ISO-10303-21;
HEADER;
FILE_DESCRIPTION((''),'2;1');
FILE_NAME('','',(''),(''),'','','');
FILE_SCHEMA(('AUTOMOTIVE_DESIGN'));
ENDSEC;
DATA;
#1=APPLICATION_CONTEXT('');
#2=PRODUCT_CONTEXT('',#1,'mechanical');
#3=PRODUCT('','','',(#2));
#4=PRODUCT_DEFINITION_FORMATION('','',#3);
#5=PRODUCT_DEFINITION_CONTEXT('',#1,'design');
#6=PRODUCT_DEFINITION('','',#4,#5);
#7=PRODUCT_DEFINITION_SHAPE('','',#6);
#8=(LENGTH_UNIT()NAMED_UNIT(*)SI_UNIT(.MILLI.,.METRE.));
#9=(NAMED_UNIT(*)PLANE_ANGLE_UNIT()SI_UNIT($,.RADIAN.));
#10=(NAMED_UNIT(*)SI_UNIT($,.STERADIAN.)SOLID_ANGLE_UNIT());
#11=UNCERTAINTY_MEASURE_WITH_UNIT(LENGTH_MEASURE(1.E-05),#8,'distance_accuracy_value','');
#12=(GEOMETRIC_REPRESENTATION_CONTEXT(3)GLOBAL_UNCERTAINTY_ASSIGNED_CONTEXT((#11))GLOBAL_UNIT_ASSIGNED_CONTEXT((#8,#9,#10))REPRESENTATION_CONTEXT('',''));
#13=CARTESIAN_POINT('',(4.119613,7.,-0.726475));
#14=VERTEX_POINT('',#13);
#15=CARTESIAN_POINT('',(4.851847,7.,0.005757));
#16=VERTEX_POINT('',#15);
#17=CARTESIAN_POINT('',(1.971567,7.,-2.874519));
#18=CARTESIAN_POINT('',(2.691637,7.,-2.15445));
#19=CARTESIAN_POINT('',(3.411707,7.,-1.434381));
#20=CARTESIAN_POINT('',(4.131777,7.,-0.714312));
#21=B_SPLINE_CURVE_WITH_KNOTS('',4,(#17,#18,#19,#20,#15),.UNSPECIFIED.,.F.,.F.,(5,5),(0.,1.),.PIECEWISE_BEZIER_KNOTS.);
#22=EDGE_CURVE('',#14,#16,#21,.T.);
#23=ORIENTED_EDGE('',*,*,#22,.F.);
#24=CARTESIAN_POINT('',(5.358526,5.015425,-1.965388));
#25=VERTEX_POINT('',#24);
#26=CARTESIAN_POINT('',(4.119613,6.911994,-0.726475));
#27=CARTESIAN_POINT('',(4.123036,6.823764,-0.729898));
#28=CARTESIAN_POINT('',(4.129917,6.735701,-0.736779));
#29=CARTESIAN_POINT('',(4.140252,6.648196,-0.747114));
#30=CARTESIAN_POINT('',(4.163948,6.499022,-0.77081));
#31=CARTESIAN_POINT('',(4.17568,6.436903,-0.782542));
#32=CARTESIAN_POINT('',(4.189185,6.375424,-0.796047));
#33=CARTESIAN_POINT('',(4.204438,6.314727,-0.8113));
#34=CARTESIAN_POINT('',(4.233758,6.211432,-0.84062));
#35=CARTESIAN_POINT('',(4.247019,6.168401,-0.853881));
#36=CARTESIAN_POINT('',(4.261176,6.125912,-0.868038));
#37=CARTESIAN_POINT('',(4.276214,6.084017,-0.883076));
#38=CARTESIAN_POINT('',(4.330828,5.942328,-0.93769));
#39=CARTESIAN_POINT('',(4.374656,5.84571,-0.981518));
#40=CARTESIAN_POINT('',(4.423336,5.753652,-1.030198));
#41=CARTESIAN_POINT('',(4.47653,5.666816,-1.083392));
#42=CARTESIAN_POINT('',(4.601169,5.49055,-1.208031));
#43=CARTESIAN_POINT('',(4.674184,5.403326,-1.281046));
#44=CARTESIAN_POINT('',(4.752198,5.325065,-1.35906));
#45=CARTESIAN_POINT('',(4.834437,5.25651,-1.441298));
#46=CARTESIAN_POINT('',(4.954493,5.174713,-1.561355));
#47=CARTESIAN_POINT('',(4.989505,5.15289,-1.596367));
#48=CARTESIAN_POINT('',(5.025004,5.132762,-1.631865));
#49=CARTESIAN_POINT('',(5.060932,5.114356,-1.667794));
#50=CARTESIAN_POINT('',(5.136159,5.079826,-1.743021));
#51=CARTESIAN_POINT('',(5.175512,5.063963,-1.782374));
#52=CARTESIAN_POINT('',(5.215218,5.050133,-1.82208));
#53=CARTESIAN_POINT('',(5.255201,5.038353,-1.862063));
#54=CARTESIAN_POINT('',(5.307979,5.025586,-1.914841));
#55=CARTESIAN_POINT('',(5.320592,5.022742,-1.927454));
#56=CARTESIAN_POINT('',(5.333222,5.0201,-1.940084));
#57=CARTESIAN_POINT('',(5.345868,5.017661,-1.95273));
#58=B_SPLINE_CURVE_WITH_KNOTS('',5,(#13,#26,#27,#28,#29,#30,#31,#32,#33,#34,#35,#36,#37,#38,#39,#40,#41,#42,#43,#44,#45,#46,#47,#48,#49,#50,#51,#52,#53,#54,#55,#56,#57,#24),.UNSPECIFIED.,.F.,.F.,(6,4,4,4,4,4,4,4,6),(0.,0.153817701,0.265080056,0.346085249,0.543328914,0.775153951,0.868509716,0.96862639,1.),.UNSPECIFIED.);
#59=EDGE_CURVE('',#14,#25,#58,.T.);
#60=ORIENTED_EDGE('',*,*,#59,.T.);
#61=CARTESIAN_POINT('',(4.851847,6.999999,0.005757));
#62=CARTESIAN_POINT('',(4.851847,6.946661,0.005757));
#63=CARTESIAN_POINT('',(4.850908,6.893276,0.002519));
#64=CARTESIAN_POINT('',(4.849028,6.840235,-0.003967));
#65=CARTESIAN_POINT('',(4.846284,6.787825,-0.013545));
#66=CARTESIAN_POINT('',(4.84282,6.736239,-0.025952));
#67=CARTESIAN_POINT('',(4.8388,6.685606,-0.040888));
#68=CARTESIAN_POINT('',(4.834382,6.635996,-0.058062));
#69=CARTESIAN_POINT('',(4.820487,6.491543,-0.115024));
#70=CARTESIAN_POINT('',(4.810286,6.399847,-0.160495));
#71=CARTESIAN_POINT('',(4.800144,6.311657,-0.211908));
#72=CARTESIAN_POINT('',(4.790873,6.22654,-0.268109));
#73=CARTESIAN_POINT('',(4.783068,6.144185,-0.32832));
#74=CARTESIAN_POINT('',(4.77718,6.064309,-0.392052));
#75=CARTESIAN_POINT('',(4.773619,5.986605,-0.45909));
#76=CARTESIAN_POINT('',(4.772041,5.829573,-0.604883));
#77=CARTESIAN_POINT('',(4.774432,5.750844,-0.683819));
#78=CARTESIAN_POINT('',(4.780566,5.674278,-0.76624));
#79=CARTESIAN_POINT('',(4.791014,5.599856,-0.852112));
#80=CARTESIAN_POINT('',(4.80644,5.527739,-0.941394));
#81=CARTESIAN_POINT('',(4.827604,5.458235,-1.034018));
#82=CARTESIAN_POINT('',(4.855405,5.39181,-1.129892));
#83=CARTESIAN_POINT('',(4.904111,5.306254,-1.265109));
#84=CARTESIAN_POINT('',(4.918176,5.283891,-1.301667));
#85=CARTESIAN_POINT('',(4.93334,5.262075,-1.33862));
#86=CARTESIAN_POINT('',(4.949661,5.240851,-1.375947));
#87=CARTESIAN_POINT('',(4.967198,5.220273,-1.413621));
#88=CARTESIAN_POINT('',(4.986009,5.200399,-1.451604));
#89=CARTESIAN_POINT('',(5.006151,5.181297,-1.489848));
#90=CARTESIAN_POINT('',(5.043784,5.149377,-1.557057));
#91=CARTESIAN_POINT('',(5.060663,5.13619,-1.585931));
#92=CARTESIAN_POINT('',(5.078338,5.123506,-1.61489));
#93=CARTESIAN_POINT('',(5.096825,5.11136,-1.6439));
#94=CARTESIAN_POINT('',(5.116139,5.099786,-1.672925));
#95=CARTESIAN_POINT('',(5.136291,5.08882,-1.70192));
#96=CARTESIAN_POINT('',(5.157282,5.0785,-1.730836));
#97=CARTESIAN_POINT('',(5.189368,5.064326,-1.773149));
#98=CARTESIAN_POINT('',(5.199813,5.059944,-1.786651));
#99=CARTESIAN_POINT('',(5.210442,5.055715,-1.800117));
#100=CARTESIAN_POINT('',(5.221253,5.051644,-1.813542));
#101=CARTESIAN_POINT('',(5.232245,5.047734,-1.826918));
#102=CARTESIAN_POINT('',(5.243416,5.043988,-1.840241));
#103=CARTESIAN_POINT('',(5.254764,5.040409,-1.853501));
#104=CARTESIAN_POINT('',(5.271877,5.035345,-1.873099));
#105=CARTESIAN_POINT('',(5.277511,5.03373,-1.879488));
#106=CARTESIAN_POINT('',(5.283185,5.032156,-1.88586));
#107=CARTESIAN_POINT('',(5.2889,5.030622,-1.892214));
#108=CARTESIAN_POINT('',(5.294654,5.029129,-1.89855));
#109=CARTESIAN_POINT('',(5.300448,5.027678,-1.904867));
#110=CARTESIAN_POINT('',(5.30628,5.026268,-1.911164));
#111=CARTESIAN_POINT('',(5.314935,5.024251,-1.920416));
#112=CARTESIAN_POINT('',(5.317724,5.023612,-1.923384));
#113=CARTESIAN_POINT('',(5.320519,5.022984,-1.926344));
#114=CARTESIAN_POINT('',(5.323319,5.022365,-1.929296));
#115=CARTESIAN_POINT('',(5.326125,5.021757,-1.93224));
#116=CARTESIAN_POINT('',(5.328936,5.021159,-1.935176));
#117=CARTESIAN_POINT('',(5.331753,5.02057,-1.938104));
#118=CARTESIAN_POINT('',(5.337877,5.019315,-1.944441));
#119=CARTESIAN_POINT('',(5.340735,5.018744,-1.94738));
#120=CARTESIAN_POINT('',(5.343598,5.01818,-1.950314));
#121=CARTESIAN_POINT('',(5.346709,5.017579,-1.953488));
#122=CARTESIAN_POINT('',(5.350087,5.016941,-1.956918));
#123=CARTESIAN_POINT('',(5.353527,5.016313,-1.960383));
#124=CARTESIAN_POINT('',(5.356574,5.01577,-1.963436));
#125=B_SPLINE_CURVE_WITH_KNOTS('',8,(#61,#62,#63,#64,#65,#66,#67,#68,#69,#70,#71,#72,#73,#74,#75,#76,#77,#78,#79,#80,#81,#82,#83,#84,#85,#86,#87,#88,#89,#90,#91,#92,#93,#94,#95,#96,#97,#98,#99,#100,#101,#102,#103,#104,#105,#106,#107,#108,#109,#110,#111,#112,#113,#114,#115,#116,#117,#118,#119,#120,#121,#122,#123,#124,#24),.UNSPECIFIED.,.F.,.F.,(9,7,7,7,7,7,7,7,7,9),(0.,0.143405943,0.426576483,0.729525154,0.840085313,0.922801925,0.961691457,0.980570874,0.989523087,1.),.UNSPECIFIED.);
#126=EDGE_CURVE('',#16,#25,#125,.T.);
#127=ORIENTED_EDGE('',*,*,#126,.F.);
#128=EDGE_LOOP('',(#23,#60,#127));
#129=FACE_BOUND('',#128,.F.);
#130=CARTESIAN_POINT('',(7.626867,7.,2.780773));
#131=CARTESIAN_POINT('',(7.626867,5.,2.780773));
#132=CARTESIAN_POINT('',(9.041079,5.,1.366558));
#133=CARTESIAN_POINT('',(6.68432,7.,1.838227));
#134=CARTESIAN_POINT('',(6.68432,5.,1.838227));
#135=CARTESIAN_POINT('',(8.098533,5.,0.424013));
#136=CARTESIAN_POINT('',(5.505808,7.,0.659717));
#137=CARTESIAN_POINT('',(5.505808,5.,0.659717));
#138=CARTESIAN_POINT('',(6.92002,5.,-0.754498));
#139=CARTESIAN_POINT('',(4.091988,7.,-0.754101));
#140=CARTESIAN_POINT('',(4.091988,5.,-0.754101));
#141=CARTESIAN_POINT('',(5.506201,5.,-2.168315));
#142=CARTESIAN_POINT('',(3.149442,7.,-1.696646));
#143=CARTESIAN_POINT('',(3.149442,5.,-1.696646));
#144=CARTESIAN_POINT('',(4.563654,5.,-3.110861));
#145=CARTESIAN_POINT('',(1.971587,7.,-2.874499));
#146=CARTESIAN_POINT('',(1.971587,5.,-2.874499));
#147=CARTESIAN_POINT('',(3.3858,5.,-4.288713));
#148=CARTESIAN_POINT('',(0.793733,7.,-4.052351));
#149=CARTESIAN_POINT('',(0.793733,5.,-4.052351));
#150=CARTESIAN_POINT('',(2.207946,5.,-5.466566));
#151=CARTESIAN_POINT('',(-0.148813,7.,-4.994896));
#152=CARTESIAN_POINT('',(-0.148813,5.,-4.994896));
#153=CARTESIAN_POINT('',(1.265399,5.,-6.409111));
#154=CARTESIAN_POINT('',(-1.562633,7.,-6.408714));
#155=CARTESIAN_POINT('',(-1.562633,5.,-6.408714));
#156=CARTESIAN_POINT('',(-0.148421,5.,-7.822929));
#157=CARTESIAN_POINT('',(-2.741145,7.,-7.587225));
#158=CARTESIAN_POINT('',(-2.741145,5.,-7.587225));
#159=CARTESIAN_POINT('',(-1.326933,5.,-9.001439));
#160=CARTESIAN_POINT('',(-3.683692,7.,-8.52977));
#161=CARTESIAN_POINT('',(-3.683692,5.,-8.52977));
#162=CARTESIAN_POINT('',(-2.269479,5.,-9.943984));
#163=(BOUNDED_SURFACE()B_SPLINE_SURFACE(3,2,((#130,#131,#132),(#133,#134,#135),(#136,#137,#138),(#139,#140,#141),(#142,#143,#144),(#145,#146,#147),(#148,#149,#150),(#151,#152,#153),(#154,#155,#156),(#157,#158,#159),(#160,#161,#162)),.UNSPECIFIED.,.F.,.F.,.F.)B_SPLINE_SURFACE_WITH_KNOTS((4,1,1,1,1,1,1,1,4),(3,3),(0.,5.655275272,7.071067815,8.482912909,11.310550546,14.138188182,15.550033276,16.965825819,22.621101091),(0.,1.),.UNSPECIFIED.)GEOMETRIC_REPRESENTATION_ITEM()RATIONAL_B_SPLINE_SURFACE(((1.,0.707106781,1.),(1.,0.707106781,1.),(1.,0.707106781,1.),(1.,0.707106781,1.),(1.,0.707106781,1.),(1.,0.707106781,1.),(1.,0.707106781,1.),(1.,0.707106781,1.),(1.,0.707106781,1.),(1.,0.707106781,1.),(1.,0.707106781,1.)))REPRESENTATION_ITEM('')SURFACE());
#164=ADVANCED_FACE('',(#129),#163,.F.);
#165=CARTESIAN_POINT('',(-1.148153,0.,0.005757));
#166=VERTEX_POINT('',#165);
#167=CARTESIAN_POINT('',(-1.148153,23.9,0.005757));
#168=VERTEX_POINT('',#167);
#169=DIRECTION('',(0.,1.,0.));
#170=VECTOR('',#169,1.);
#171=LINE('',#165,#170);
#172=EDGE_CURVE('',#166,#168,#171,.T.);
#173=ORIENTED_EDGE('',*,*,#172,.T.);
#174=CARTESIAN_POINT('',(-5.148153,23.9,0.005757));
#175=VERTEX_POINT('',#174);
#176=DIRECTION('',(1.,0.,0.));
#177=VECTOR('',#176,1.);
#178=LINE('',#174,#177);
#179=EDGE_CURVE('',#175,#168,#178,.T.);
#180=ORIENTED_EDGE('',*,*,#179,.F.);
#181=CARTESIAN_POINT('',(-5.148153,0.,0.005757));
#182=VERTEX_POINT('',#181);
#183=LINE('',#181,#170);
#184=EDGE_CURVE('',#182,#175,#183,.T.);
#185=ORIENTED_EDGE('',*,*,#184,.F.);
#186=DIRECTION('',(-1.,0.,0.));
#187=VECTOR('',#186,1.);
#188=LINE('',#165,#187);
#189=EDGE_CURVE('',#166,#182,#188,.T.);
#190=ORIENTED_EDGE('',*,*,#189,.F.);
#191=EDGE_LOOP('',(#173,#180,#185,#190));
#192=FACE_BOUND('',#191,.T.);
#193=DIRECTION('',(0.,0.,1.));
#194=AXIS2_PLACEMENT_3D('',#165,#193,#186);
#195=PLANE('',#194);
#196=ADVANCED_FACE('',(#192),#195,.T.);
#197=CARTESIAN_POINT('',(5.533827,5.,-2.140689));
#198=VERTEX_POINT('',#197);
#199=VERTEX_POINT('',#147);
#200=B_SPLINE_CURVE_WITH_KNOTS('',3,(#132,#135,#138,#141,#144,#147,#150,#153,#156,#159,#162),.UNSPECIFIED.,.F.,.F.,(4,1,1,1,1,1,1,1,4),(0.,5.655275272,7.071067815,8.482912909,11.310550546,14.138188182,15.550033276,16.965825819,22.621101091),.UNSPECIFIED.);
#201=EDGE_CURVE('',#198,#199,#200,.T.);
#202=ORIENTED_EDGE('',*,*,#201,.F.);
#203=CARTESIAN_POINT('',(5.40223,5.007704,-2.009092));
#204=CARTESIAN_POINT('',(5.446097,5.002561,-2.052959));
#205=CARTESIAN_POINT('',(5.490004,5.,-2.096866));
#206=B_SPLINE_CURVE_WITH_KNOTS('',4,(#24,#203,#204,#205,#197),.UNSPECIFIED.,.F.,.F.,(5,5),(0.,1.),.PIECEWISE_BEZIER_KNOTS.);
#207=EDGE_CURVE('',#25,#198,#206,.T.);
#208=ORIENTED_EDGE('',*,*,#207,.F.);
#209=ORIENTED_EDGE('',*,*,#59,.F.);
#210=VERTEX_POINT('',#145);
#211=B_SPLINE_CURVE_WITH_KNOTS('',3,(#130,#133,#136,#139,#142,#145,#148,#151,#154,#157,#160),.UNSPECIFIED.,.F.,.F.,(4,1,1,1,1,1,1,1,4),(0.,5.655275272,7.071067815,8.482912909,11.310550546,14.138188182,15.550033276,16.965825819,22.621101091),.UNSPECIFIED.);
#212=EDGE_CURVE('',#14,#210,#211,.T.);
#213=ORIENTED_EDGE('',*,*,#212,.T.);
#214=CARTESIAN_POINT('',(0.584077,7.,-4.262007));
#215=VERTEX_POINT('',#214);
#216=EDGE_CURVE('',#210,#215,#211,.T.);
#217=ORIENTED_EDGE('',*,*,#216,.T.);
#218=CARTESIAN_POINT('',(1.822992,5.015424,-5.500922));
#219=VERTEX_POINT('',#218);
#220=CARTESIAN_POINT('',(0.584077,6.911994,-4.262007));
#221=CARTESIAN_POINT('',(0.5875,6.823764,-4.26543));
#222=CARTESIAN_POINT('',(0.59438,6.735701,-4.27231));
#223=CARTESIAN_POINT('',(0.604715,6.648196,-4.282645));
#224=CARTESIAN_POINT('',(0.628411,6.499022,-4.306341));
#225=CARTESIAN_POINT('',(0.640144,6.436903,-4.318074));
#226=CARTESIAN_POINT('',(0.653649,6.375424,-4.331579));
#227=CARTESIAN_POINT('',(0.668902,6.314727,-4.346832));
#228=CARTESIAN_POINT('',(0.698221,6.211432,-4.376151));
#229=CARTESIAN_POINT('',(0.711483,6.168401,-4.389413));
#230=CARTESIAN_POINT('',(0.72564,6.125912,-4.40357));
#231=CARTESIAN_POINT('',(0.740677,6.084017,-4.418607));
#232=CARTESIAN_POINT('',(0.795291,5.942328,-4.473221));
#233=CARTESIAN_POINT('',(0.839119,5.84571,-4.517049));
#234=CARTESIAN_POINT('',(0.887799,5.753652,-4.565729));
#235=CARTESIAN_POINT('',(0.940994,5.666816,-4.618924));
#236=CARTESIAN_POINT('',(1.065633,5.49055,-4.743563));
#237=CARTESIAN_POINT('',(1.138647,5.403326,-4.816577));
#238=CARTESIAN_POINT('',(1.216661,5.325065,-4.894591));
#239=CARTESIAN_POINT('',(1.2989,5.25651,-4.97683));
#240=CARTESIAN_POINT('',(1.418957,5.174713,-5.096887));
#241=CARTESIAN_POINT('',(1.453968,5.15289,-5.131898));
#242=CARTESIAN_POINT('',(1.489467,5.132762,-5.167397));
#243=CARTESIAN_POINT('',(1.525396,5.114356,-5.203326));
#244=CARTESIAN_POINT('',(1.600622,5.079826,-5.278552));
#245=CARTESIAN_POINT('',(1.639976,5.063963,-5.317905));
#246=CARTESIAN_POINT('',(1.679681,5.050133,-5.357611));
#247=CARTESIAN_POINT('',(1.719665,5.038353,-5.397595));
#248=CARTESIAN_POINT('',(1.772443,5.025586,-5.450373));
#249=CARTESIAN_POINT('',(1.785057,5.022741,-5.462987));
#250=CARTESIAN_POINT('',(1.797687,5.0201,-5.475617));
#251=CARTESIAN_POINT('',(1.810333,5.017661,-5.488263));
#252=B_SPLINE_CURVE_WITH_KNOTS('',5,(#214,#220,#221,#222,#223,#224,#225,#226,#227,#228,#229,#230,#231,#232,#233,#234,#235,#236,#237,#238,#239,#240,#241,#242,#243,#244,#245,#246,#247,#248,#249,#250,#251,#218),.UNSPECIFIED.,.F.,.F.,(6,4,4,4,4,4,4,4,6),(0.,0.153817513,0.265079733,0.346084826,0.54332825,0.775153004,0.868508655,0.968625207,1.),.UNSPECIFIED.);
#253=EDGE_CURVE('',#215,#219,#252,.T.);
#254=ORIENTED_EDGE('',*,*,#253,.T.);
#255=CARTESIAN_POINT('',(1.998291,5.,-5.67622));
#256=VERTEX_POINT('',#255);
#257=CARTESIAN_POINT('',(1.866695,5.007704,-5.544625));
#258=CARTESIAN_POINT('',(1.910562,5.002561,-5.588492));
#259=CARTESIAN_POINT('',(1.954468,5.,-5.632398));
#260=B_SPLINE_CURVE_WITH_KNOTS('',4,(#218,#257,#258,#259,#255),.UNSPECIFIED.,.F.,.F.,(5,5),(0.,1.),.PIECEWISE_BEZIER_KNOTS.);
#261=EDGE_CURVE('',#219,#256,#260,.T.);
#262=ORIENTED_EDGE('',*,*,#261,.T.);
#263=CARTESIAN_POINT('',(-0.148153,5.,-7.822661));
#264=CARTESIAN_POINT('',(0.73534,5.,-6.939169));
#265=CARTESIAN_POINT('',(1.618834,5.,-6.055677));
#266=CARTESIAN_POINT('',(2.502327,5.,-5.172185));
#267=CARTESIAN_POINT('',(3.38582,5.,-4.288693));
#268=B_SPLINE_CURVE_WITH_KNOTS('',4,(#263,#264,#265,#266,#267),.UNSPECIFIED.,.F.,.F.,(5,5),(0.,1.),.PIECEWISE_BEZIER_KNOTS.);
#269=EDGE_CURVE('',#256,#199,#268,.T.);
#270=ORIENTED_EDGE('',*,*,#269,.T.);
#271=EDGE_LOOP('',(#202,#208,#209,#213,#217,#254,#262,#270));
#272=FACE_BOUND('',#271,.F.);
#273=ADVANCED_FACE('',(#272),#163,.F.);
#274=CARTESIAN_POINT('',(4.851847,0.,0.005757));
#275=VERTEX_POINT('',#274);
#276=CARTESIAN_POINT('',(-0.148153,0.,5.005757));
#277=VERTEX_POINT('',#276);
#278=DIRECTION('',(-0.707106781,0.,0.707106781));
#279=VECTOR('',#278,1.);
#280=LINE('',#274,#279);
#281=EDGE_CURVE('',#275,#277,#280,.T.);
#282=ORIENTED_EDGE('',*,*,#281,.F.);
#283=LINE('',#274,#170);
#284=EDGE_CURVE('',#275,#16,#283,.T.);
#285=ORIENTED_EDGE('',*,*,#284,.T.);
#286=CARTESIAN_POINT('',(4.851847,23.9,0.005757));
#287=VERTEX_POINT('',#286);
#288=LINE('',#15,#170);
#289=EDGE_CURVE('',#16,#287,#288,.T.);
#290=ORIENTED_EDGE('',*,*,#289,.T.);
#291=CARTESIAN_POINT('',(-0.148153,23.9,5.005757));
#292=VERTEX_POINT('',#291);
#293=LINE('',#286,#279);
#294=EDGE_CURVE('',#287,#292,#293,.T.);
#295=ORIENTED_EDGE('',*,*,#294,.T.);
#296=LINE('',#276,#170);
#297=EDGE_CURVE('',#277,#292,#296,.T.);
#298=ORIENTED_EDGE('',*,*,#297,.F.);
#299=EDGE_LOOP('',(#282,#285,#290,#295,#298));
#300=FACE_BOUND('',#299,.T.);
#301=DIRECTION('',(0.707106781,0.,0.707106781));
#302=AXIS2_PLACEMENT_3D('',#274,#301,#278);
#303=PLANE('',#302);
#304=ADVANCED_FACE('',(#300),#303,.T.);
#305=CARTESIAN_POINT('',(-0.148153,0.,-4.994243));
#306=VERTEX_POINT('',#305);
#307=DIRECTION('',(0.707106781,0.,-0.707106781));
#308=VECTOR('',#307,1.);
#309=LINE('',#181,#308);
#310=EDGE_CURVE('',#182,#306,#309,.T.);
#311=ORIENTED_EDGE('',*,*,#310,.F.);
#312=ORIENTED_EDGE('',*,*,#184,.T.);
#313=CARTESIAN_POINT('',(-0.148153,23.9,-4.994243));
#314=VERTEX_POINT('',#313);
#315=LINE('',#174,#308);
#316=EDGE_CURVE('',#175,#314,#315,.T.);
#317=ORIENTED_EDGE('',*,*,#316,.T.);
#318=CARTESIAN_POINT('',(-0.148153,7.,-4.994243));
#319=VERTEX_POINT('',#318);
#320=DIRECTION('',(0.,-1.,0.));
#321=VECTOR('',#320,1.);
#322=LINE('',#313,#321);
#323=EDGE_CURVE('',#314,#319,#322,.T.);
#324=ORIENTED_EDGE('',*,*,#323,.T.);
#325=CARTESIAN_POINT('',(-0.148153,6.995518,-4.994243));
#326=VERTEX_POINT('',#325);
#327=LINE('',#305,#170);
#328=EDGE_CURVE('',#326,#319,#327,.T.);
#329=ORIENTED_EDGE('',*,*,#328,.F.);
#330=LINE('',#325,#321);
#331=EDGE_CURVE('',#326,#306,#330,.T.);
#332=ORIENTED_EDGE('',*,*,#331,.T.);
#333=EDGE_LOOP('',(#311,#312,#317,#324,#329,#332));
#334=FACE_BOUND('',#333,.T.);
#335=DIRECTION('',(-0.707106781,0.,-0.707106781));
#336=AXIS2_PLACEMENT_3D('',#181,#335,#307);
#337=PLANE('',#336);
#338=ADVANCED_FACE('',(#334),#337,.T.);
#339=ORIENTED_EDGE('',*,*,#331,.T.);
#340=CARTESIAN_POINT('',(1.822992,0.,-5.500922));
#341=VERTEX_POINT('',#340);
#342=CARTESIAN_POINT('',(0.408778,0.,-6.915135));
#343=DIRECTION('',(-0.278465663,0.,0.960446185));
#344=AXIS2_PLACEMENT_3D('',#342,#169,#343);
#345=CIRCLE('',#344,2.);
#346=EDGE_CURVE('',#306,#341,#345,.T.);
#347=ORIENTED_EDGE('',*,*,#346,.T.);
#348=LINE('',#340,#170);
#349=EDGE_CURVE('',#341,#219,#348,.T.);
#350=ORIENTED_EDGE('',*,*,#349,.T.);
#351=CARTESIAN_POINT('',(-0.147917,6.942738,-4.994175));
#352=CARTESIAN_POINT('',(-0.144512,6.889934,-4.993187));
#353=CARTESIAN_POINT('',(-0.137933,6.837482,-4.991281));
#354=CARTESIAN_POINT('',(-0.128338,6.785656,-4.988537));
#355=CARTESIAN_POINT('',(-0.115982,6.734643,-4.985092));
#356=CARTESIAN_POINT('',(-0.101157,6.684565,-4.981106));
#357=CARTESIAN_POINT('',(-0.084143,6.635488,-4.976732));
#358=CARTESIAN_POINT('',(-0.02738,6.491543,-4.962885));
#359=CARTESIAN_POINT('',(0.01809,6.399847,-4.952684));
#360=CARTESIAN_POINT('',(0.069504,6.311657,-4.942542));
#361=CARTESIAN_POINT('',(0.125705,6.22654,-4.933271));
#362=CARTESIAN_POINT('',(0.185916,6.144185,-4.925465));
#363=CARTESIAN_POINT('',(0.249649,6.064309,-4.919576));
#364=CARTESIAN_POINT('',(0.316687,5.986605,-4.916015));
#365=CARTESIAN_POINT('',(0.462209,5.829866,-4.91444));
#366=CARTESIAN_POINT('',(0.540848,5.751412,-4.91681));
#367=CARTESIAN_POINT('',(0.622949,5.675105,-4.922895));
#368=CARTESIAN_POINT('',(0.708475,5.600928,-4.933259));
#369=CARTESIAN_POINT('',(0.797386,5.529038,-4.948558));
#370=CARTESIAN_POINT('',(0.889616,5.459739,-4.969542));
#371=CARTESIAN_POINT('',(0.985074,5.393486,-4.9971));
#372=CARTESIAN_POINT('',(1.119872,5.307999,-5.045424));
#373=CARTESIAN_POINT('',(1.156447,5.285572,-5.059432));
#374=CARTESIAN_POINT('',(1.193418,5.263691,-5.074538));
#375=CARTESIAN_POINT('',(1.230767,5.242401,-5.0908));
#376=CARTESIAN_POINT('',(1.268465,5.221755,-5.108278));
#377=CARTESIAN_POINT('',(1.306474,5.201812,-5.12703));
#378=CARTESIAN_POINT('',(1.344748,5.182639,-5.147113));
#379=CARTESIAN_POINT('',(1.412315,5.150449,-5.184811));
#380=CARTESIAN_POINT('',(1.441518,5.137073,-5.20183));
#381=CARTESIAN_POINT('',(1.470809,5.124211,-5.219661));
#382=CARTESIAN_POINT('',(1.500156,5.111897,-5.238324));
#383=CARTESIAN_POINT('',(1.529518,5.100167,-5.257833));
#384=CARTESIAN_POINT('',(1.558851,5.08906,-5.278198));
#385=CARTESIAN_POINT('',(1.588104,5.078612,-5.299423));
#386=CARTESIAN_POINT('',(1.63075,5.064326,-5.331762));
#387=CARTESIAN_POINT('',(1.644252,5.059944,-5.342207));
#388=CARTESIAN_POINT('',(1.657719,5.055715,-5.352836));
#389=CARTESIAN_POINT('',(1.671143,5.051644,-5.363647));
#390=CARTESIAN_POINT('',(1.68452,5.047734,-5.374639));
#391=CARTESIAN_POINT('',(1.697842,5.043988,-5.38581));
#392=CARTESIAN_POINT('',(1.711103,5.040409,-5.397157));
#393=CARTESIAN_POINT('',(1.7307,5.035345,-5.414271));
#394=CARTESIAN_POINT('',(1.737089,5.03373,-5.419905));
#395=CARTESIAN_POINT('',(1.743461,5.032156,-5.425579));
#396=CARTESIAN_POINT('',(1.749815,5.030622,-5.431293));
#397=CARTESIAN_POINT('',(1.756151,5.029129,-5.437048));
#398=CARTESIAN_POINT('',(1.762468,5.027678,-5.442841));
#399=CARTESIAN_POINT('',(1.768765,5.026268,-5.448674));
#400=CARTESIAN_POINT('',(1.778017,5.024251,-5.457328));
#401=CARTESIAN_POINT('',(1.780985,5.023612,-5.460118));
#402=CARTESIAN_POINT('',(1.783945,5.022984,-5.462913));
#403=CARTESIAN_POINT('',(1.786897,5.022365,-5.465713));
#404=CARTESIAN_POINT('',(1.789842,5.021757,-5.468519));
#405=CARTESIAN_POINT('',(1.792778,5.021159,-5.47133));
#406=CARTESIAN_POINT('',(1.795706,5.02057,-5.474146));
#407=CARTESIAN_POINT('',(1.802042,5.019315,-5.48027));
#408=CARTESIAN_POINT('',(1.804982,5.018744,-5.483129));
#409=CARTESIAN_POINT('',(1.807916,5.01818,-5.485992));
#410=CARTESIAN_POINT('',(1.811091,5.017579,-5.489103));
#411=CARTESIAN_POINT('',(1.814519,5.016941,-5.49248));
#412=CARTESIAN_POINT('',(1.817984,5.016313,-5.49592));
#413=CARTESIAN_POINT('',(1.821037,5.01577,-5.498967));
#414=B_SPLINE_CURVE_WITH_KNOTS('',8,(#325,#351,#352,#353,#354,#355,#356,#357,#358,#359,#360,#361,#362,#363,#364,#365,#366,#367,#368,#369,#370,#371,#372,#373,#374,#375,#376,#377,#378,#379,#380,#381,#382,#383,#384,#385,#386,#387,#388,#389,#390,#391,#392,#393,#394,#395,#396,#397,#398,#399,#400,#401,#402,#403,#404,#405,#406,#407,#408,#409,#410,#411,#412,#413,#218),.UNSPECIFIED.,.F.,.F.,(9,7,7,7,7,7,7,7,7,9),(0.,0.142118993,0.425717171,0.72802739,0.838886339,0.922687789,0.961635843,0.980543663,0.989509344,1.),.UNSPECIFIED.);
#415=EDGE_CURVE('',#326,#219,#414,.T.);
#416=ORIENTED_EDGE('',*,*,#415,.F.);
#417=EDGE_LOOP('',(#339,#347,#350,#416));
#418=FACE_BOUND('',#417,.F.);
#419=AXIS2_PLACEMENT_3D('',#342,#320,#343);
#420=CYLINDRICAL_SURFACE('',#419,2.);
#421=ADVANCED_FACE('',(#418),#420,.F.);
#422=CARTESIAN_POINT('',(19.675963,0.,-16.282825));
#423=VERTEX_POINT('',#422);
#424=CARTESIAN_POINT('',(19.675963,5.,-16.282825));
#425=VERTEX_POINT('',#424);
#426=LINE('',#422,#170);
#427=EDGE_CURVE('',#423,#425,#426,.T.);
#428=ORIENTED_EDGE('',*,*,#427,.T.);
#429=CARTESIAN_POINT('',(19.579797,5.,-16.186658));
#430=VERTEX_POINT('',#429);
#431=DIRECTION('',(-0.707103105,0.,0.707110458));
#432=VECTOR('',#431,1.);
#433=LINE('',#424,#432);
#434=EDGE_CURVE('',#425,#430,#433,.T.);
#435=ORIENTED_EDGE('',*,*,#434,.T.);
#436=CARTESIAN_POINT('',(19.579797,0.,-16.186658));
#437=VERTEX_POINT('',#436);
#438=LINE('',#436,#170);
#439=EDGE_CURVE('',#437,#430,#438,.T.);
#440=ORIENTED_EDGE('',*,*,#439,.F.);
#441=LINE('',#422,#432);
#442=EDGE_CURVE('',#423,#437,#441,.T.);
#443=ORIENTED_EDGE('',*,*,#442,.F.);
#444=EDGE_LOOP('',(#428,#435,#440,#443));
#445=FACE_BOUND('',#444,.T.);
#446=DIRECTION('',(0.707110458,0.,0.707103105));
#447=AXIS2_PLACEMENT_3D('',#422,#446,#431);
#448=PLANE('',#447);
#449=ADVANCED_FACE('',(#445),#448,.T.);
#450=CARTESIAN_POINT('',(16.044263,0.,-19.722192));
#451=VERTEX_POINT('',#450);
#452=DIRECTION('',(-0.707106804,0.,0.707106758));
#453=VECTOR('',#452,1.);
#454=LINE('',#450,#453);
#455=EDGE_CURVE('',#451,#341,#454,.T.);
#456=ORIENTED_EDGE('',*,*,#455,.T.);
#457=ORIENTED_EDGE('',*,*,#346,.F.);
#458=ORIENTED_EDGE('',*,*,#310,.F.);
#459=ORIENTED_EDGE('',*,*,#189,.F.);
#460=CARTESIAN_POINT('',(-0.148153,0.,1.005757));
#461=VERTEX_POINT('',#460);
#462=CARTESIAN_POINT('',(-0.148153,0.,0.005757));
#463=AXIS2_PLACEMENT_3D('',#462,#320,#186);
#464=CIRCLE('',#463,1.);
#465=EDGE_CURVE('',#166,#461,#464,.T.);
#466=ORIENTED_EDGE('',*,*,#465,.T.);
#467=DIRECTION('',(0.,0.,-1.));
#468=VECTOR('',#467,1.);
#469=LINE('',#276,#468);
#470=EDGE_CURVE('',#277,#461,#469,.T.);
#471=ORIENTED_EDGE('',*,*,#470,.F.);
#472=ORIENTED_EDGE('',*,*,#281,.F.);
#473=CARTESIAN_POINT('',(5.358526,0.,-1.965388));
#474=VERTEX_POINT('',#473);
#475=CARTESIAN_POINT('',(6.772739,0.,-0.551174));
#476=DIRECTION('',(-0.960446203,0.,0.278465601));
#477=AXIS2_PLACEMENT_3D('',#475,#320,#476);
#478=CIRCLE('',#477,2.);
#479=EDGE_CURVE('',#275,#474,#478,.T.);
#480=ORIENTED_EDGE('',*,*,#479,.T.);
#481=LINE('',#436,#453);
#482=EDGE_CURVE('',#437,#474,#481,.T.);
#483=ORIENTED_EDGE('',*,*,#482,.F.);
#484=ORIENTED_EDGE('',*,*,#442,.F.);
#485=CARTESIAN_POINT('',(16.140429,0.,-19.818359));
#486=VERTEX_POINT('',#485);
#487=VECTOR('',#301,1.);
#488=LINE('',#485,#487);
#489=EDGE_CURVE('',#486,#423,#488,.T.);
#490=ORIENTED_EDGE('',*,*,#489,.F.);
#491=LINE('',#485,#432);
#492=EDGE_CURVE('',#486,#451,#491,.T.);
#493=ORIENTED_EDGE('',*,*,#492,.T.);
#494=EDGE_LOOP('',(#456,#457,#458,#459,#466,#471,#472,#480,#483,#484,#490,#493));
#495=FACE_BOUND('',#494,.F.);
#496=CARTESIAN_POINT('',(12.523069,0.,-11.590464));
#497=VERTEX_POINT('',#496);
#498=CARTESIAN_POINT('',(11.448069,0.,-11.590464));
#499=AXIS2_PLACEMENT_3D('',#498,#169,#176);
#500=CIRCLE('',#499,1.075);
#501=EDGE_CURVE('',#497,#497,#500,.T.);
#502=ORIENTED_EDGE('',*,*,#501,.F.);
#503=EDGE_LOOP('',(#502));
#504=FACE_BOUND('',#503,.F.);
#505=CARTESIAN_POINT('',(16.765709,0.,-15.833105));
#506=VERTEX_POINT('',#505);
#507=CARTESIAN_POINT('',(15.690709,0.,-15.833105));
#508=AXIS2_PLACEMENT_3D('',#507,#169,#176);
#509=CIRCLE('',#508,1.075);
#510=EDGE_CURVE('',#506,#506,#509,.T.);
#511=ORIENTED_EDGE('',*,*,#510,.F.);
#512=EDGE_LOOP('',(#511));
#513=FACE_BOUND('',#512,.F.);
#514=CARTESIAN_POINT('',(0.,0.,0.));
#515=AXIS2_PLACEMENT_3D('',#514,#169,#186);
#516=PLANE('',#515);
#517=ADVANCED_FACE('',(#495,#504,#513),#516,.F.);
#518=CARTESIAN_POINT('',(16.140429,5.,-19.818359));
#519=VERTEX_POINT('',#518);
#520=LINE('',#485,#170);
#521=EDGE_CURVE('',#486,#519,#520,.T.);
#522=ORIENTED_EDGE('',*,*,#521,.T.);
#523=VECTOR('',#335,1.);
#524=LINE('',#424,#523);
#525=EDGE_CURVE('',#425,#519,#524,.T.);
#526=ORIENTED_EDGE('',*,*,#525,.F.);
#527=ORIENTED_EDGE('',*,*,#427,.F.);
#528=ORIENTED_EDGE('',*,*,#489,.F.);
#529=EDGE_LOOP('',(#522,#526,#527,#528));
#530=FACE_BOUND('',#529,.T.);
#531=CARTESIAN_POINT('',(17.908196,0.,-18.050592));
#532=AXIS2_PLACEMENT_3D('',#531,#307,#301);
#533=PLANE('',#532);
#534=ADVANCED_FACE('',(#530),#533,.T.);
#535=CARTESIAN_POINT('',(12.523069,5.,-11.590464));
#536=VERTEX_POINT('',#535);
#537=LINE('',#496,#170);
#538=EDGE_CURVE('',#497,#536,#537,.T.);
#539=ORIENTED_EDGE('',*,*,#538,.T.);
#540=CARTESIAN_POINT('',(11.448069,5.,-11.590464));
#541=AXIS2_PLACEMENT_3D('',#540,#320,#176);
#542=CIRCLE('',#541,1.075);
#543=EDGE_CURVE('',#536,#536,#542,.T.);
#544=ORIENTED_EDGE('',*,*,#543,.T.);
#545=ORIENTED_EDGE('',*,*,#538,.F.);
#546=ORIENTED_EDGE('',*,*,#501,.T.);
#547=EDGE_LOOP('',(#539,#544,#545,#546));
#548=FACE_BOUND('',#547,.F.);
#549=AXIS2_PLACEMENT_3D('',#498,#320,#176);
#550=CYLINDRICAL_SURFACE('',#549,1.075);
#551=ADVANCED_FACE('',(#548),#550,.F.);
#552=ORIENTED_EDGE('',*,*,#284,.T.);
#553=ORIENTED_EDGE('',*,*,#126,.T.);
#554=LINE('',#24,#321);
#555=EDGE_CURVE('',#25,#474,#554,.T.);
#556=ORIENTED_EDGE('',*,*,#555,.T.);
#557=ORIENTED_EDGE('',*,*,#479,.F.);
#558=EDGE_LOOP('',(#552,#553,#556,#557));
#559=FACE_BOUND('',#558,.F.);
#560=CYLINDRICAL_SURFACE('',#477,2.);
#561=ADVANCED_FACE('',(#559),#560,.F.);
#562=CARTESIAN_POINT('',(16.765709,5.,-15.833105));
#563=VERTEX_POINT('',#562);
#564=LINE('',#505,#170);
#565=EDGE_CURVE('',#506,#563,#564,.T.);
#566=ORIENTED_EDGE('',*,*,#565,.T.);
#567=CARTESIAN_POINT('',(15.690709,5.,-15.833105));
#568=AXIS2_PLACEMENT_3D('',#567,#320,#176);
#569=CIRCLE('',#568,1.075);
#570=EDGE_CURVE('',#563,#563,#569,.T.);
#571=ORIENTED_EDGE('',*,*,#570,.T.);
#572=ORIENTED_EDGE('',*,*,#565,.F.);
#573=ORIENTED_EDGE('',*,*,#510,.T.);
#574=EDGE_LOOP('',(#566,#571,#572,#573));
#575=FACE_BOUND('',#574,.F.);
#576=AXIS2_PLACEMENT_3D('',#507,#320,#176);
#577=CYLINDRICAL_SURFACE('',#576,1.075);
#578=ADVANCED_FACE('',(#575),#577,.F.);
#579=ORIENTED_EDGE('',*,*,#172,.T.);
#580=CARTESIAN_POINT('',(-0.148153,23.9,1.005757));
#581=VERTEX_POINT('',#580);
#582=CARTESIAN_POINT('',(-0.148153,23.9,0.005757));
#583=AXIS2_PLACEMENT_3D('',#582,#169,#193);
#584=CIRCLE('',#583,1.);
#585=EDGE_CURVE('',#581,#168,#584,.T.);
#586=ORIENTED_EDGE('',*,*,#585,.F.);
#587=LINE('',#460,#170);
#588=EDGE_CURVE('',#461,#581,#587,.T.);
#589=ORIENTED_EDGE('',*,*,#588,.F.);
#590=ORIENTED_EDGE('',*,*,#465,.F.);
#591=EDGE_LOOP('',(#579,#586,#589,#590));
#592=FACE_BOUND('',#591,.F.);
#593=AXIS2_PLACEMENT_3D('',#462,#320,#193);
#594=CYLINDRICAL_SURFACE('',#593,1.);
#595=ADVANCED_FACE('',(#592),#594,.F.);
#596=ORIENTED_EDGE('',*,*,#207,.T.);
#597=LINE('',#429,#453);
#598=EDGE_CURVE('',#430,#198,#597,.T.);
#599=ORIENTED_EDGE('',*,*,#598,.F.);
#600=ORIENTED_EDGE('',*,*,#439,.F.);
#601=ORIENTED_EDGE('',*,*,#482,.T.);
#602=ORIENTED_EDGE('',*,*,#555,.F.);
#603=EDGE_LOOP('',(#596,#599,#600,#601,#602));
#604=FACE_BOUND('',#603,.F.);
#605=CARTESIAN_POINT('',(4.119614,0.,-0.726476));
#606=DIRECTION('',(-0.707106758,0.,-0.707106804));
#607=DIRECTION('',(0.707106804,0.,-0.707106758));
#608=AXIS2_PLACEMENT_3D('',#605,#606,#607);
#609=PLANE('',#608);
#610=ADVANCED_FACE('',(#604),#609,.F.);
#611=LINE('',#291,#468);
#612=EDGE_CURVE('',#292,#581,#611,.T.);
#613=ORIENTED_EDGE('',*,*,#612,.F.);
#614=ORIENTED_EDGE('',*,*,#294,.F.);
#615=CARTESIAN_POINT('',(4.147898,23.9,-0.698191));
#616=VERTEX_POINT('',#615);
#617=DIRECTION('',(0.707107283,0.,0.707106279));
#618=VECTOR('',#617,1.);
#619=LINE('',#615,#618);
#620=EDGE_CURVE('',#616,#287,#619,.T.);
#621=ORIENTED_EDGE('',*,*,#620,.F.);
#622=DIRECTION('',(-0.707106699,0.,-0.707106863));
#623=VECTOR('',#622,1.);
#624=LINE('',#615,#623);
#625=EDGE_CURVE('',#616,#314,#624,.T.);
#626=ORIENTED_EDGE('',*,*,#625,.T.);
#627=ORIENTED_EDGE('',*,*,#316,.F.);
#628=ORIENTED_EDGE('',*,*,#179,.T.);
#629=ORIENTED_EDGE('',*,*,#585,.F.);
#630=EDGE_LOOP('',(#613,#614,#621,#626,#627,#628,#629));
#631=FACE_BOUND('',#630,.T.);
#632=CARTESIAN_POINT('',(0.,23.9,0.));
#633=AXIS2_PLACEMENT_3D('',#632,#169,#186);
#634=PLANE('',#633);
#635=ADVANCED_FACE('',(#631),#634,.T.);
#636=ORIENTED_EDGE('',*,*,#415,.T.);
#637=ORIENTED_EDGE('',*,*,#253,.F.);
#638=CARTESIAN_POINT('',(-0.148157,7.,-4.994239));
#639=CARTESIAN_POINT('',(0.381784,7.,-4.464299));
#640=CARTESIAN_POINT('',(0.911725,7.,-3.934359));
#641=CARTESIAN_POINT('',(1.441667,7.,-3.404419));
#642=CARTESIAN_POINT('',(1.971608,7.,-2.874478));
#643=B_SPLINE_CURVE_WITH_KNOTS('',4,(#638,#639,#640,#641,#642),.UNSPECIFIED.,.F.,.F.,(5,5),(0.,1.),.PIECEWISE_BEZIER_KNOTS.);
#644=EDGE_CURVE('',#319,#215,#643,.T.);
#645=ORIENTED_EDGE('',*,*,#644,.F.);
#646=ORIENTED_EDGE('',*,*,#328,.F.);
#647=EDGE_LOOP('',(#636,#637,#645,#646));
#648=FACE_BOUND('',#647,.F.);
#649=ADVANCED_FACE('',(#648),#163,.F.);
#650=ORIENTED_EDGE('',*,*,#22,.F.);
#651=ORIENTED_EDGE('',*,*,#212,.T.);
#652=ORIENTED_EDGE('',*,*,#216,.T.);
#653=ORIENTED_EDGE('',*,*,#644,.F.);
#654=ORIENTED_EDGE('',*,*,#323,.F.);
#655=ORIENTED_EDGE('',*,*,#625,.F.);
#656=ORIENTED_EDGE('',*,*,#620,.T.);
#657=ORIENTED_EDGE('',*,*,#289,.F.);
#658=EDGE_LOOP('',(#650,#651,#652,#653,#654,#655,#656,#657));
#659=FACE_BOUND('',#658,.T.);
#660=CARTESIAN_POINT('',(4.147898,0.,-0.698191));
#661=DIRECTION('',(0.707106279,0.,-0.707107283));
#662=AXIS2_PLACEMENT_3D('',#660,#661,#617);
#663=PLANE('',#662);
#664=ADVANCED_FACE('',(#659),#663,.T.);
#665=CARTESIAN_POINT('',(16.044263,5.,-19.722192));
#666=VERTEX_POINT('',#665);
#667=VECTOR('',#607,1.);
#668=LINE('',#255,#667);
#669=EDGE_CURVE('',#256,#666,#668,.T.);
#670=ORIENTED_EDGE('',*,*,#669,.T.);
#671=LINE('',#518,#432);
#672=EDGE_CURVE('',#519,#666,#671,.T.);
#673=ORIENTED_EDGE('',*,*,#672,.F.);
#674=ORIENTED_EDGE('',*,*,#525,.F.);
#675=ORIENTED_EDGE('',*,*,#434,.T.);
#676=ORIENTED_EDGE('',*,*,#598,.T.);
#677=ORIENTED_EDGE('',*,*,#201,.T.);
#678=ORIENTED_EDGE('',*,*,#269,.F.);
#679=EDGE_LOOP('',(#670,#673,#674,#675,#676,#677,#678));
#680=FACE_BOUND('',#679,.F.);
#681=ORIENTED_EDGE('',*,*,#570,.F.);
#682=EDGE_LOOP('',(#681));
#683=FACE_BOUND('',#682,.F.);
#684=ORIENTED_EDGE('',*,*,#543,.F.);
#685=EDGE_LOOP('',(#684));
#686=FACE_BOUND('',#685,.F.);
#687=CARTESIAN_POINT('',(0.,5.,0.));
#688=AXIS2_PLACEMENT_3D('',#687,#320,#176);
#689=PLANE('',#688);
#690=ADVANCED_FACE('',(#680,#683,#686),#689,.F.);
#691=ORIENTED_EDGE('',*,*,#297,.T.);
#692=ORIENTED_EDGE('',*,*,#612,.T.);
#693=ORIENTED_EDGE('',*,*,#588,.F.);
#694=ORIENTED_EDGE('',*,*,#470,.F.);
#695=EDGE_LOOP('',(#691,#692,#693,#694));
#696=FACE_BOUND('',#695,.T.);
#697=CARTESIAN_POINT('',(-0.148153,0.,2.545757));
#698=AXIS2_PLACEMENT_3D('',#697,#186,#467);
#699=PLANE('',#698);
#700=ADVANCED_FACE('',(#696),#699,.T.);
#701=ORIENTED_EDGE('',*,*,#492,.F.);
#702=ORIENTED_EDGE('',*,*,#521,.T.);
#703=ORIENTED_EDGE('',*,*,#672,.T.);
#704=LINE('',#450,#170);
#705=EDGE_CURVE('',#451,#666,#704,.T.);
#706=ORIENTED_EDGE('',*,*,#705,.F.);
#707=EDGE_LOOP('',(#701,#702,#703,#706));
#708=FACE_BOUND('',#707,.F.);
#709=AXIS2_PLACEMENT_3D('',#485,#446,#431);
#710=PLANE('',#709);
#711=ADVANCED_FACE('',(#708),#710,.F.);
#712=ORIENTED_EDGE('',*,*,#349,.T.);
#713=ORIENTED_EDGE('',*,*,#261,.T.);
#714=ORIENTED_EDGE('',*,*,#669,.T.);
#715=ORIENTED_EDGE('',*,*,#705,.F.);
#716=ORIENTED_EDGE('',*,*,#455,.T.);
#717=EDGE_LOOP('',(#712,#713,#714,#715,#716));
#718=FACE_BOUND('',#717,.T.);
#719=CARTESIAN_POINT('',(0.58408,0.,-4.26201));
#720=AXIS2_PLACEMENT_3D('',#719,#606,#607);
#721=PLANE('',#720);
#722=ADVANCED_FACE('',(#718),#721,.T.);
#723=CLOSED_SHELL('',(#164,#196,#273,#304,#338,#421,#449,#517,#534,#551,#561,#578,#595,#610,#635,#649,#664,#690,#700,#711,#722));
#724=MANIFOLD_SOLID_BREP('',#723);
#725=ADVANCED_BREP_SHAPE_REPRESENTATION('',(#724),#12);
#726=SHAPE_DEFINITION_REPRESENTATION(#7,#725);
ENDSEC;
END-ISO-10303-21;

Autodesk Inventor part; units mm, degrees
ref_plane "YZ Plane" through (0, 0, 0) normal (1, 0, 0) x (0, 1, 0)
ref_plane "XZ Plane" through (0, 0, 0) normal (0, 1, 0) x (-1, 0, 0)
ref_plane "XY Plane" through (0, 0, 0) normal (0, 0, 1) x (1, 0, 0)
sketch "Sketch1" plane through (0, 0, 0) normal (0, 1, 0) x (-1, 0, 0)
  arc A0 (-0.158902, 2.527129) -> (-1.647898, 1.801809) centre (0.148153, 0.005757) ccw
  arc A1 (-0.158902, 2.527129) -> (-1.647898, 1.801809) centre (0.148153, 0.005757) ccw
  arc A2 (1.944204, -1.790294) -> (2.669525, -0.301298) centre (0.148153, 0.005757) ccw
  arc A3 (1.944204, -1.790294) -> (2.669525, -0.301298) centre (0.148153, 0.005757) ccw
  arc A4 (0.148153, 2.545757) -> (-1.647898, 1.801809) centre (0.148153, 0.005757) ccw
  line L0 (0.148153, 5.005757) -> (0.148153, 2.545757)
  line L1 (0.148153, 0.005757) -> (2.688153, 0.005757)
  line L2 (-1.647898, 1.801809) -> (-4.147898, -0.698191)
  arc A5 (1.944204, -1.790294) -> (2.688153, 0.005757) centre (0.148153, 0.005757) ccw
  line L3 (-4.147898, -0.698191) -> (-4.851847, 0.005757)
  arc A6 (0.148153, 2.545757) -> (-1.647898, 1.801809) centre (0.148153, 0.005757) ccw
  arc A7 (0.148153, 2.545757) -> (-1.647898, 1.801809) centre (0.148153, 0.005757) ccw
  arc A8 (-0.158902, 2.527129) -> (-1.647898, 1.801809) centre (0.148153, 0.005757) ccw
  arc A9 (-0.158902, 2.527129) -> (-1.647898, 1.801809) centre (0.148153, 0.005757) ccw
  line L4 (-4.851847, 0.005757) -> (0.148153, 5.005757)
  line L5 (-4.851847, 0.005757) -> (0.148153, 5.005757)
  line L6 (0.148153, 5.005757) -> (0.148153, 2.545757)
  arc A10 (0.148153, 2.545757) -> (-1.647898, 1.801809) centre (0.148153, 0.005757) ccw
  line L7 (-1.647898, 1.801809) -> (-4.147898, -0.698191)
  line L8 (-4.147898, -0.698191) -> (-4.851847, 0.005757)
  arc A11 (1.944204, -1.790294) -> (2.688153, 0.005757) centre (0.148153, 0.005757) ccw
  arc A12 (1.944204, -1.790294) -> (2.669525, -0.301298) centre (0.148153, 0.005757) ccw
  arc A13 (1.944204, -1.790294) -> (2.669525, -0.301298) centre (0.148153, 0.005757) ccw
  arc A14 (1.944204, -1.790294) -> (2.688153, 0.005757) centre (0.148153, 0.005757) ccw
  line L9 (-4.147898, -0.698191) -> (-0.555796, -4.290294)
  line L10 (0.148153, 1.005757) -> (0.148153, 0.005757)
  line L11 (0.148153, 1.005757) -> (0.148153, 0.005757)
  line L12 (0.148153, 2.545757) -> (0.148153, 0.005757)
  line L13 (0.148153, 5.005757) -> (0.148153, 2.545757)
  line L14 (0.148153, 5.005757) -> (0.148153, 1.005757)
  line L15 (0.148153, 0.005757) -> (1.148153, 0.005757)
  line L16 (1.148153, 0.005757) -> (5.148153, 0.005757)
  line L17 (2.688153, 0.005757) -> (5.148153, 0.005757)
  line L18 (0.148153, 0.005757) -> (2.688153, 0.005757)
  line L19 (5.148153, 0.005757) -> (0.148153, -4.994243)
  line L20 (0.148153, -4.994243) -> (5.148153, 0.005757)
  line L21 (-4.147898, -0.698191) -> (-4.851847, 0.005757)
  line L22 (-4.147898, -0.698191) -> (-0.555796, -4.290294)
  line L23 (0.148153, -4.994243) -> (-0.555796, -4.290294)
  line L24 (-4.851847, 0.005757) -> (0.148153, -4.994243)
  line L25 (-4.851847, 0.005757) -> (0.148153, -4.994243)
  line L26 (0.148153, 5.005757) -> (-4.851847, 0.005757)
  line L27 (-4.851847, 0.005757) -> (0.148153, 5.005757)
  line L28 (0.148153, 5.005757) -> (-4.851847, 0.005757)
  line L29 (0.148153, -4.994243) -> (-0.555796, -4.290294)
  arc A15 (1.944204, -1.790294) -> (2.688153, 0.005757) centre (0.148153, 0.005757) ccw
  line L30 (-0.555796, -4.290294) -> (1.944204, -1.790294)
  line L31 (2.688153, 0.005757) -> (5.148153, 0.005757)
  line L32 (5.148153, 0.005757) -> (0.148153, -4.994243)
  line L33 (0.148153, -4.994243) -> (-0.555796, -4.290294)
  line L34 (-0.555796, -4.290294) -> (1.944204, -1.790294)
  arc A16 (1.944204, -1.790294) -> (2.688153, 0.005757) centre (0.148153, 0.005757) ccw
  line L35 (2.688153, 0.005757) -> (5.148153, 0.005757)
  line L36 (5.148153, 0.005757) -> (0.148153, -4.994243)
  arc A17 (0.148153, 2.545757) -> (-1.647898, 1.801809) centre (0.148153, 0.005757) ccw
  circle A18 centre (-2.355005, -2.497401) radius 1.5
  circle A19 centre (-2.355005, -2.497401) radius 1.5
  circle A20 centre (-2.355005, -2.497401) radius 1.5
  circle A21 centre (-2.355005, -2.497401) radius 1.5
  circle A22 centre (-2.355005, -2.497401) radius 1.5
  line L37 (0.148153, 5.005757) -> (0.148153, 1.005757)
  arc A23 (0.148153, 1.005757) -> (1.148153, 0.005757) centre (0.148153, 0.005757) ccw
  line L38 (0.148153, -4.994243) -> (5.148153, 0.005757)
  line L39 (1.148153, 0.005757) -> (5.148153, 0.005757)
  line L40 (0.148153, 0.005757) -> (1.148153, 0.005757)
  arc A24 (0.148153, 1.005757) -> (1.148153, 0.005757) centre (0.148153, 0.005757) ccw
  line L41 (0.148153, 0.005757) -> (1.148153, 0.005757)
  line L42 (0.148153, 1.005757) -> (0.148153, 0.005757)
  arc A25 (0.148153, 1.005757) -> (1.148153, 0.005757) centre (0.148153, 0.005757) ccw
  arc A26 (0.148153, 1.005757) -> (1.148153, 0.005757) centre (0.148153, 0.005757) ccw
  arc A27 (0.148153, 1.005757) -> (1.148153, 0.005757) centre (0.148153, 0.005757) ccw
  line L43 (0.148153, 5.005757) -> (-4.851847, 0.005757)
  line L44 (-4.851847, 0.005757) -> (0.148153, -4.994243)
  line L45 (0.148153, -4.994243) -> (5.148153, 0.005757)
  line L46 (1.148153, 0.005757) -> (5.148153, 0.005757)
  arc A28 (0.148153, 1.005757) -> (1.148153, 0.005757) centre (0.148153, 0.005757) ccw
  line L47 (0.148153, 5.005757) -> (0.148153, 1.005757)
  line L48 (0.148153, 2.545757) -> (0.148153, 0.005757)
  arc A29 (-1.647898, 1.801809) -> (1.944204, -1.790294) centre (0.148153, 0.005757) ccw
  circle A30 centre (0.148153, 0.005757) radius 2.54
  line L49 (0.148153, -3.586345) -> (-3.443949, 0.005757)
  line L50 (-1.647898, -1.790294) -> (-2.355005, -2.497401)
  circle A31 centre (-2.355005, -2.497401) radius 2.54
  point P0 (0, 0)
  point P1 (1.148153, 0.005757)
extrude "Extrusion1" add sketch "Sketch1" along normal blind 23.9 contours A4 L12 A23 A31 A29 A0 | A0 L2 L3 L4 L0 A4 | A29 A31 L49 L2 | L49 A31 L2 | A31 A29 A18 | A29 A18 L49 A31 | A5 A2 A29 A31 A23 L1 | L16 L19 L23 L30 A2 A5 | A31 L49 A18 L9 | A29 L49 A18 | A18 A29 | A18 L49 L50 L9 | A31 L49 L30 | L9 A18 L49 A31 | A29 A31 L49 A18 | A18 L49 A29 | L49 A18 L9 L50 | L30 L49 A31 A29
sketch "Sketch2" plane through (0, 0, 0) normal (0, -1, 0) x (1, 0, 0)
  line L0 (4.851847, 0.005757) -> (-0.148153, -4.994243)
  line L1 (2.351847, -2.494243) -> (17.908196, -18.050592)
  circle A0 centre (11.448069, -11.590464) radius 1.075
  circle A1 centre (15.690709, -15.833105) radius 1.075
  line L2 (-0.148153, 1.005757) -> (-0.148153, 5.005757)
  line L3 (-0.148153, 5.005757) -> (4.851847, 0.005757)
  line L4 (-0.148153, 5.005757) -> (4.851847, 0.005757)
  line L5 (-0.148153, -4.994243) -> (-5.148153, 0.005757)
  line L6 (-5.148153, 0.005757) -> (-0.148153, -4.994243)
  line L7 (2.351847, -2.494243) -> (4.119614, -0.726476)
  line L8 (4.119614, -0.726476) -> (0.58408, -4.26201)
  line L9 (0.58408, -4.26201) -> (16.044263, -19.722192)
  line L10 (4.119614, -0.726476) -> (19.579797, -16.186658)
  line L11 (17.908196, -18.050592) -> (17.81203, -18.146758)
  line L12 (17.81203, -18.146758) -> (16.140429, -19.818359)
  line L13 (16.140429, -19.818359) -> (16.044263, -19.722192)
  line L14 (17.908196, -18.050592) -> (19.675963, -16.282825)
  line L15 (19.675963, -16.282825) -> (19.579797, -16.186658)
  point P0 (0, 0)
  dimension "d2" = 22
  dimension "d5" = 2.15
  dimension "d6" = 2.15
  dimension "d7" = 2.5
  dimension "d8" = 5
extrude "Extrusion2" add sketch "Sketch2" against normal blind 5 contours L10 L15 L14 L1 A1 A0 L0 | L1 A0 A1 L11 L12 L13 L9 L0
fillet "Fillet1" radius 2 2 edges at (4.1196, 2.5, -0.7265) (0.5841, 2.5, -4.262)
fillet "Fillet2" radius 2 1 edges at (2.3518, 5, -2.4942)
sketch "Sketch3" plane through (0, 5, 0) normal (0, 1, 0) x (1, 0, 0)
  circle A0 centre (11.448069, 11.590464) radius 1.075
  circle A1 centre (15.690709, 15.833105) radius 1.075
  point P0 (0, 0)
properties part number "ALUMFINGER_3DPrint"
